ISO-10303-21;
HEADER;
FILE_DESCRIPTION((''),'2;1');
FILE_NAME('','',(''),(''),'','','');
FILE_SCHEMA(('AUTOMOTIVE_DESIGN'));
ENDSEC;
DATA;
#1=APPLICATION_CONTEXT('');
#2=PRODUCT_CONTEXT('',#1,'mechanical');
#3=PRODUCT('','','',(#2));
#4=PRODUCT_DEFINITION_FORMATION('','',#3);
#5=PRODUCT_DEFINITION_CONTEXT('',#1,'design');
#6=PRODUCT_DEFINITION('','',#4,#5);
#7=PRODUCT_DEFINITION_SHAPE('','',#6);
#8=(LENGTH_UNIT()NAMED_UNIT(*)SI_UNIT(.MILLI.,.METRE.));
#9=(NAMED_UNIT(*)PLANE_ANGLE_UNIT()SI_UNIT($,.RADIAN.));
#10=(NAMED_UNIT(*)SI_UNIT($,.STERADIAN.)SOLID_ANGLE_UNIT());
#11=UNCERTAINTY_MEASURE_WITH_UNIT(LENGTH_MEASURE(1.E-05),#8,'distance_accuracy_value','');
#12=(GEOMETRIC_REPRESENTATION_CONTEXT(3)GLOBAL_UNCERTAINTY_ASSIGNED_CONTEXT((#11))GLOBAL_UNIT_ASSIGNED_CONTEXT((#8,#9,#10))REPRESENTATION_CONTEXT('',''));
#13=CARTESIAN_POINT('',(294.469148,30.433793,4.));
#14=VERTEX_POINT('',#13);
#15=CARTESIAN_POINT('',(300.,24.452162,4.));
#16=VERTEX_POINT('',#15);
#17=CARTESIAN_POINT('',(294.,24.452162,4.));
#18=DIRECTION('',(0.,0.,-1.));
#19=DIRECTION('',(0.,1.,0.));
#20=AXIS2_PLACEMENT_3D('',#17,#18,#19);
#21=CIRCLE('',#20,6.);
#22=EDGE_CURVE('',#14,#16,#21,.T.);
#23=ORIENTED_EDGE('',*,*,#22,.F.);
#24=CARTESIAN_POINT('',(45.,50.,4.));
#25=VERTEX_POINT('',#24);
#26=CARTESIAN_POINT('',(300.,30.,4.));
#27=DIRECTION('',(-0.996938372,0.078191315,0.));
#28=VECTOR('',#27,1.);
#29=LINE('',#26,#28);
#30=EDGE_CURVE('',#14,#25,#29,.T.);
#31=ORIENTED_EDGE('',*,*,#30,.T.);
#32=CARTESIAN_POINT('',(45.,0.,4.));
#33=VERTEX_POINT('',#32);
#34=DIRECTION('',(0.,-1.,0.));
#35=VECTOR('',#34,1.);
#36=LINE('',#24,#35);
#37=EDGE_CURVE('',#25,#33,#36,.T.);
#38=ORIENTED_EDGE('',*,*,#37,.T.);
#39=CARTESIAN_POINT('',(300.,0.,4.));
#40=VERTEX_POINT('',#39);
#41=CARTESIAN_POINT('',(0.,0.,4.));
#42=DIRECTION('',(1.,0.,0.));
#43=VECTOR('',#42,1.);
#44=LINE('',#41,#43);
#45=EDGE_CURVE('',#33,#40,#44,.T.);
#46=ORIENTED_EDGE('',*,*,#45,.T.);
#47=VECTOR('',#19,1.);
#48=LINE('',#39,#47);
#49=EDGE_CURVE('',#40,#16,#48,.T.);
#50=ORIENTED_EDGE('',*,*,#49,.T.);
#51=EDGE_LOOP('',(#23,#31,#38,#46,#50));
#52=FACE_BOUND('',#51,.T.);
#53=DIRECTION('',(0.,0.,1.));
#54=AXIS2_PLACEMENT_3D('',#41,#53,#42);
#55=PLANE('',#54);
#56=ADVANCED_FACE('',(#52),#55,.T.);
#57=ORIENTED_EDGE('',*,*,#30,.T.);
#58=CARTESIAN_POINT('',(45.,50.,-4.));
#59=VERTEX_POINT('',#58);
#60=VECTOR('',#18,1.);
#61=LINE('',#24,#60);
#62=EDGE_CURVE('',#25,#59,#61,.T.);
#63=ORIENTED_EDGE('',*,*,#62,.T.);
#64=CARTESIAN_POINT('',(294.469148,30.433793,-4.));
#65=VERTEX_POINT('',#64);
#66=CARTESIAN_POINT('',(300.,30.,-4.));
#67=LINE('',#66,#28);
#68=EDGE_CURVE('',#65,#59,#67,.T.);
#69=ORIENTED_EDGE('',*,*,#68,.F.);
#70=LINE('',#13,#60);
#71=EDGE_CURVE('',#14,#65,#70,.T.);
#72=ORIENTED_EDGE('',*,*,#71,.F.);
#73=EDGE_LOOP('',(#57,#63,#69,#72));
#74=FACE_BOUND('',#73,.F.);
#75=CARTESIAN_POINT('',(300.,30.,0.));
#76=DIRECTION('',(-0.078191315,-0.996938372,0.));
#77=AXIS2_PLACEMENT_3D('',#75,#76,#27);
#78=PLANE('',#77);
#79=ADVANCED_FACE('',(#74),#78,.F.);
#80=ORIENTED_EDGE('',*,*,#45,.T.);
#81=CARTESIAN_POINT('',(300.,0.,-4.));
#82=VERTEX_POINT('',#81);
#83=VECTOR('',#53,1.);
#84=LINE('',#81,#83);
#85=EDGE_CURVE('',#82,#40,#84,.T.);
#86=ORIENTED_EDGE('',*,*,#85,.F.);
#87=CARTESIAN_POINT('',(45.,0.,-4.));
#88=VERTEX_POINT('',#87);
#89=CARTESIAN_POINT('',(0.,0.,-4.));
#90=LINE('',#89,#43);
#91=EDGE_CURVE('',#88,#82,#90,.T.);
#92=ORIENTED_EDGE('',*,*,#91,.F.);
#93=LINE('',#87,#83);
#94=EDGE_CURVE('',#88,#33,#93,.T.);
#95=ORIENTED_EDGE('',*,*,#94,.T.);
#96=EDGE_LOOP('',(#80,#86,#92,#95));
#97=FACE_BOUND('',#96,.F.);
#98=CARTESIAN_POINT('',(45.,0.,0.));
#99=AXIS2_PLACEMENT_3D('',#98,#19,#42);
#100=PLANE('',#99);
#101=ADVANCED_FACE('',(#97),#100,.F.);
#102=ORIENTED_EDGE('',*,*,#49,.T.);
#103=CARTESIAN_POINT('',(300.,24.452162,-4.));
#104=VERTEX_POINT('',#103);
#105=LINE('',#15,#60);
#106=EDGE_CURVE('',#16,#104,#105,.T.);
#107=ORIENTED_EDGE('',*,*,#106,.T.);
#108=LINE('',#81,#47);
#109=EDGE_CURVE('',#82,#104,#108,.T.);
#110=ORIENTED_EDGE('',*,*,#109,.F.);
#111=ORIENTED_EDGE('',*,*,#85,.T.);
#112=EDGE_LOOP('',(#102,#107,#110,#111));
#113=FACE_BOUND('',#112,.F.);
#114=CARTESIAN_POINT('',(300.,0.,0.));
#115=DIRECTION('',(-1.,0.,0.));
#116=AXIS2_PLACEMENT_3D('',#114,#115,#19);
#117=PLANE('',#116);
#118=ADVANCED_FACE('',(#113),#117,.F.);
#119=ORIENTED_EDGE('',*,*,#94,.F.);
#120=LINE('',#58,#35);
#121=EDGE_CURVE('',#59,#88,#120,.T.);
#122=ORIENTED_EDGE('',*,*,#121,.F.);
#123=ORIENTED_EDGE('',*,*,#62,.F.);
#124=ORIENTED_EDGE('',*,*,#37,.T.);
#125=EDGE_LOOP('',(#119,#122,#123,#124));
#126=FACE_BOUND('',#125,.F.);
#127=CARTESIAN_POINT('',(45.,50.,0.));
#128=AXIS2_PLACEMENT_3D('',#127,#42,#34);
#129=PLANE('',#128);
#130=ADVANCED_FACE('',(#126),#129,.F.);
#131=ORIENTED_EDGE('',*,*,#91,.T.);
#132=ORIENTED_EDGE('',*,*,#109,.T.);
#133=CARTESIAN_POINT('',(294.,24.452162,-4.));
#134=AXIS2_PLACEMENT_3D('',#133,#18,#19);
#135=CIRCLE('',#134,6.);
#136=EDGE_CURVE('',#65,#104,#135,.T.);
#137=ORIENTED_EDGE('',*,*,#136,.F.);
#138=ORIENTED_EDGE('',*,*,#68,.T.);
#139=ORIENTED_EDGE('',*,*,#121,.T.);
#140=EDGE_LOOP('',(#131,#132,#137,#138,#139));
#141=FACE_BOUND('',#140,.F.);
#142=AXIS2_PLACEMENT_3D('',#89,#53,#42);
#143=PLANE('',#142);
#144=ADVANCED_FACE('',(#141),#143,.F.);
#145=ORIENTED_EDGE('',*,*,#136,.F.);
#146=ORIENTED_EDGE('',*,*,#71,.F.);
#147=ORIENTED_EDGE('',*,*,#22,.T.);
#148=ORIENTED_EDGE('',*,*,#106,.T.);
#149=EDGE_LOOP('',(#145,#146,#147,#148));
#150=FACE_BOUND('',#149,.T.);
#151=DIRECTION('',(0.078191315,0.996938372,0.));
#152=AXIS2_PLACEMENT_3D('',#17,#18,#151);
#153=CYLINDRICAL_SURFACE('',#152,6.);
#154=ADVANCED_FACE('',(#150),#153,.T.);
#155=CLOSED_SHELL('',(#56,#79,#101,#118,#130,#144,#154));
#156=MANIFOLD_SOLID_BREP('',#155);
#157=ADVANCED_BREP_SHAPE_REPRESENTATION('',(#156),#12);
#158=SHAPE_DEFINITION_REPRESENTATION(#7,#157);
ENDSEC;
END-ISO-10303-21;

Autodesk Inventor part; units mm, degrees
ref_plane "YZ Plane" through (0, 0, 0) normal (1, 0, 0) x (0, 1, 0)
ref_plane "XZ Plane" through (0, 0, 0) normal (0, 1, 0) x (-1, 0, 0)
ref_plane "XY Plane" through (0, 0, 0) normal (0, 0, 1) x (1, 0, 0)
sketch "Sketch3" plane through (0, 0, 0) normal (0, 0, 1) x (1, 0, 0)
  line L0 (0, 0) -> (300, 0)
  line L1 (300, 0) -> (300, 30)
  line L2 (300, 30) -> (-5.542, 53.9641)
  line L3 (45, 50) -> (45, 0)
  dimension "d11" = 300
  dimension "d12" = 30
  dimension "d13" = 45
  dimension "d14" = 50
extrude "Plate1" add sketch "Sketch3" along normal mid plane 8
fillet "Corner Round1" radius 6 1 edges at (300, 30, 0)
equation "\"d15\" = Thickness"
equation "\"BendRadius\" = Thickness"
equation "\"BendReliefWidth\" = Thickness"
equation "\"BendReliefDepth\" = 0.5 * Thickness"
equation "\"CornerReliefSize\" = 4 * Thickness"
equation "\"MinimumRemnant\" = 2 * Thickness"
equation "\"TransitionRadius\" = BendRadius"
equation "\"JacobiRadiusSize\" = BendRadius"
equation "\"GapSize\" = Thickness"
equation "\"Thickness\" = 8"
properties part number "PRS 1614 charging hatch reinf 500mm_D1200 940" material "Steel"
